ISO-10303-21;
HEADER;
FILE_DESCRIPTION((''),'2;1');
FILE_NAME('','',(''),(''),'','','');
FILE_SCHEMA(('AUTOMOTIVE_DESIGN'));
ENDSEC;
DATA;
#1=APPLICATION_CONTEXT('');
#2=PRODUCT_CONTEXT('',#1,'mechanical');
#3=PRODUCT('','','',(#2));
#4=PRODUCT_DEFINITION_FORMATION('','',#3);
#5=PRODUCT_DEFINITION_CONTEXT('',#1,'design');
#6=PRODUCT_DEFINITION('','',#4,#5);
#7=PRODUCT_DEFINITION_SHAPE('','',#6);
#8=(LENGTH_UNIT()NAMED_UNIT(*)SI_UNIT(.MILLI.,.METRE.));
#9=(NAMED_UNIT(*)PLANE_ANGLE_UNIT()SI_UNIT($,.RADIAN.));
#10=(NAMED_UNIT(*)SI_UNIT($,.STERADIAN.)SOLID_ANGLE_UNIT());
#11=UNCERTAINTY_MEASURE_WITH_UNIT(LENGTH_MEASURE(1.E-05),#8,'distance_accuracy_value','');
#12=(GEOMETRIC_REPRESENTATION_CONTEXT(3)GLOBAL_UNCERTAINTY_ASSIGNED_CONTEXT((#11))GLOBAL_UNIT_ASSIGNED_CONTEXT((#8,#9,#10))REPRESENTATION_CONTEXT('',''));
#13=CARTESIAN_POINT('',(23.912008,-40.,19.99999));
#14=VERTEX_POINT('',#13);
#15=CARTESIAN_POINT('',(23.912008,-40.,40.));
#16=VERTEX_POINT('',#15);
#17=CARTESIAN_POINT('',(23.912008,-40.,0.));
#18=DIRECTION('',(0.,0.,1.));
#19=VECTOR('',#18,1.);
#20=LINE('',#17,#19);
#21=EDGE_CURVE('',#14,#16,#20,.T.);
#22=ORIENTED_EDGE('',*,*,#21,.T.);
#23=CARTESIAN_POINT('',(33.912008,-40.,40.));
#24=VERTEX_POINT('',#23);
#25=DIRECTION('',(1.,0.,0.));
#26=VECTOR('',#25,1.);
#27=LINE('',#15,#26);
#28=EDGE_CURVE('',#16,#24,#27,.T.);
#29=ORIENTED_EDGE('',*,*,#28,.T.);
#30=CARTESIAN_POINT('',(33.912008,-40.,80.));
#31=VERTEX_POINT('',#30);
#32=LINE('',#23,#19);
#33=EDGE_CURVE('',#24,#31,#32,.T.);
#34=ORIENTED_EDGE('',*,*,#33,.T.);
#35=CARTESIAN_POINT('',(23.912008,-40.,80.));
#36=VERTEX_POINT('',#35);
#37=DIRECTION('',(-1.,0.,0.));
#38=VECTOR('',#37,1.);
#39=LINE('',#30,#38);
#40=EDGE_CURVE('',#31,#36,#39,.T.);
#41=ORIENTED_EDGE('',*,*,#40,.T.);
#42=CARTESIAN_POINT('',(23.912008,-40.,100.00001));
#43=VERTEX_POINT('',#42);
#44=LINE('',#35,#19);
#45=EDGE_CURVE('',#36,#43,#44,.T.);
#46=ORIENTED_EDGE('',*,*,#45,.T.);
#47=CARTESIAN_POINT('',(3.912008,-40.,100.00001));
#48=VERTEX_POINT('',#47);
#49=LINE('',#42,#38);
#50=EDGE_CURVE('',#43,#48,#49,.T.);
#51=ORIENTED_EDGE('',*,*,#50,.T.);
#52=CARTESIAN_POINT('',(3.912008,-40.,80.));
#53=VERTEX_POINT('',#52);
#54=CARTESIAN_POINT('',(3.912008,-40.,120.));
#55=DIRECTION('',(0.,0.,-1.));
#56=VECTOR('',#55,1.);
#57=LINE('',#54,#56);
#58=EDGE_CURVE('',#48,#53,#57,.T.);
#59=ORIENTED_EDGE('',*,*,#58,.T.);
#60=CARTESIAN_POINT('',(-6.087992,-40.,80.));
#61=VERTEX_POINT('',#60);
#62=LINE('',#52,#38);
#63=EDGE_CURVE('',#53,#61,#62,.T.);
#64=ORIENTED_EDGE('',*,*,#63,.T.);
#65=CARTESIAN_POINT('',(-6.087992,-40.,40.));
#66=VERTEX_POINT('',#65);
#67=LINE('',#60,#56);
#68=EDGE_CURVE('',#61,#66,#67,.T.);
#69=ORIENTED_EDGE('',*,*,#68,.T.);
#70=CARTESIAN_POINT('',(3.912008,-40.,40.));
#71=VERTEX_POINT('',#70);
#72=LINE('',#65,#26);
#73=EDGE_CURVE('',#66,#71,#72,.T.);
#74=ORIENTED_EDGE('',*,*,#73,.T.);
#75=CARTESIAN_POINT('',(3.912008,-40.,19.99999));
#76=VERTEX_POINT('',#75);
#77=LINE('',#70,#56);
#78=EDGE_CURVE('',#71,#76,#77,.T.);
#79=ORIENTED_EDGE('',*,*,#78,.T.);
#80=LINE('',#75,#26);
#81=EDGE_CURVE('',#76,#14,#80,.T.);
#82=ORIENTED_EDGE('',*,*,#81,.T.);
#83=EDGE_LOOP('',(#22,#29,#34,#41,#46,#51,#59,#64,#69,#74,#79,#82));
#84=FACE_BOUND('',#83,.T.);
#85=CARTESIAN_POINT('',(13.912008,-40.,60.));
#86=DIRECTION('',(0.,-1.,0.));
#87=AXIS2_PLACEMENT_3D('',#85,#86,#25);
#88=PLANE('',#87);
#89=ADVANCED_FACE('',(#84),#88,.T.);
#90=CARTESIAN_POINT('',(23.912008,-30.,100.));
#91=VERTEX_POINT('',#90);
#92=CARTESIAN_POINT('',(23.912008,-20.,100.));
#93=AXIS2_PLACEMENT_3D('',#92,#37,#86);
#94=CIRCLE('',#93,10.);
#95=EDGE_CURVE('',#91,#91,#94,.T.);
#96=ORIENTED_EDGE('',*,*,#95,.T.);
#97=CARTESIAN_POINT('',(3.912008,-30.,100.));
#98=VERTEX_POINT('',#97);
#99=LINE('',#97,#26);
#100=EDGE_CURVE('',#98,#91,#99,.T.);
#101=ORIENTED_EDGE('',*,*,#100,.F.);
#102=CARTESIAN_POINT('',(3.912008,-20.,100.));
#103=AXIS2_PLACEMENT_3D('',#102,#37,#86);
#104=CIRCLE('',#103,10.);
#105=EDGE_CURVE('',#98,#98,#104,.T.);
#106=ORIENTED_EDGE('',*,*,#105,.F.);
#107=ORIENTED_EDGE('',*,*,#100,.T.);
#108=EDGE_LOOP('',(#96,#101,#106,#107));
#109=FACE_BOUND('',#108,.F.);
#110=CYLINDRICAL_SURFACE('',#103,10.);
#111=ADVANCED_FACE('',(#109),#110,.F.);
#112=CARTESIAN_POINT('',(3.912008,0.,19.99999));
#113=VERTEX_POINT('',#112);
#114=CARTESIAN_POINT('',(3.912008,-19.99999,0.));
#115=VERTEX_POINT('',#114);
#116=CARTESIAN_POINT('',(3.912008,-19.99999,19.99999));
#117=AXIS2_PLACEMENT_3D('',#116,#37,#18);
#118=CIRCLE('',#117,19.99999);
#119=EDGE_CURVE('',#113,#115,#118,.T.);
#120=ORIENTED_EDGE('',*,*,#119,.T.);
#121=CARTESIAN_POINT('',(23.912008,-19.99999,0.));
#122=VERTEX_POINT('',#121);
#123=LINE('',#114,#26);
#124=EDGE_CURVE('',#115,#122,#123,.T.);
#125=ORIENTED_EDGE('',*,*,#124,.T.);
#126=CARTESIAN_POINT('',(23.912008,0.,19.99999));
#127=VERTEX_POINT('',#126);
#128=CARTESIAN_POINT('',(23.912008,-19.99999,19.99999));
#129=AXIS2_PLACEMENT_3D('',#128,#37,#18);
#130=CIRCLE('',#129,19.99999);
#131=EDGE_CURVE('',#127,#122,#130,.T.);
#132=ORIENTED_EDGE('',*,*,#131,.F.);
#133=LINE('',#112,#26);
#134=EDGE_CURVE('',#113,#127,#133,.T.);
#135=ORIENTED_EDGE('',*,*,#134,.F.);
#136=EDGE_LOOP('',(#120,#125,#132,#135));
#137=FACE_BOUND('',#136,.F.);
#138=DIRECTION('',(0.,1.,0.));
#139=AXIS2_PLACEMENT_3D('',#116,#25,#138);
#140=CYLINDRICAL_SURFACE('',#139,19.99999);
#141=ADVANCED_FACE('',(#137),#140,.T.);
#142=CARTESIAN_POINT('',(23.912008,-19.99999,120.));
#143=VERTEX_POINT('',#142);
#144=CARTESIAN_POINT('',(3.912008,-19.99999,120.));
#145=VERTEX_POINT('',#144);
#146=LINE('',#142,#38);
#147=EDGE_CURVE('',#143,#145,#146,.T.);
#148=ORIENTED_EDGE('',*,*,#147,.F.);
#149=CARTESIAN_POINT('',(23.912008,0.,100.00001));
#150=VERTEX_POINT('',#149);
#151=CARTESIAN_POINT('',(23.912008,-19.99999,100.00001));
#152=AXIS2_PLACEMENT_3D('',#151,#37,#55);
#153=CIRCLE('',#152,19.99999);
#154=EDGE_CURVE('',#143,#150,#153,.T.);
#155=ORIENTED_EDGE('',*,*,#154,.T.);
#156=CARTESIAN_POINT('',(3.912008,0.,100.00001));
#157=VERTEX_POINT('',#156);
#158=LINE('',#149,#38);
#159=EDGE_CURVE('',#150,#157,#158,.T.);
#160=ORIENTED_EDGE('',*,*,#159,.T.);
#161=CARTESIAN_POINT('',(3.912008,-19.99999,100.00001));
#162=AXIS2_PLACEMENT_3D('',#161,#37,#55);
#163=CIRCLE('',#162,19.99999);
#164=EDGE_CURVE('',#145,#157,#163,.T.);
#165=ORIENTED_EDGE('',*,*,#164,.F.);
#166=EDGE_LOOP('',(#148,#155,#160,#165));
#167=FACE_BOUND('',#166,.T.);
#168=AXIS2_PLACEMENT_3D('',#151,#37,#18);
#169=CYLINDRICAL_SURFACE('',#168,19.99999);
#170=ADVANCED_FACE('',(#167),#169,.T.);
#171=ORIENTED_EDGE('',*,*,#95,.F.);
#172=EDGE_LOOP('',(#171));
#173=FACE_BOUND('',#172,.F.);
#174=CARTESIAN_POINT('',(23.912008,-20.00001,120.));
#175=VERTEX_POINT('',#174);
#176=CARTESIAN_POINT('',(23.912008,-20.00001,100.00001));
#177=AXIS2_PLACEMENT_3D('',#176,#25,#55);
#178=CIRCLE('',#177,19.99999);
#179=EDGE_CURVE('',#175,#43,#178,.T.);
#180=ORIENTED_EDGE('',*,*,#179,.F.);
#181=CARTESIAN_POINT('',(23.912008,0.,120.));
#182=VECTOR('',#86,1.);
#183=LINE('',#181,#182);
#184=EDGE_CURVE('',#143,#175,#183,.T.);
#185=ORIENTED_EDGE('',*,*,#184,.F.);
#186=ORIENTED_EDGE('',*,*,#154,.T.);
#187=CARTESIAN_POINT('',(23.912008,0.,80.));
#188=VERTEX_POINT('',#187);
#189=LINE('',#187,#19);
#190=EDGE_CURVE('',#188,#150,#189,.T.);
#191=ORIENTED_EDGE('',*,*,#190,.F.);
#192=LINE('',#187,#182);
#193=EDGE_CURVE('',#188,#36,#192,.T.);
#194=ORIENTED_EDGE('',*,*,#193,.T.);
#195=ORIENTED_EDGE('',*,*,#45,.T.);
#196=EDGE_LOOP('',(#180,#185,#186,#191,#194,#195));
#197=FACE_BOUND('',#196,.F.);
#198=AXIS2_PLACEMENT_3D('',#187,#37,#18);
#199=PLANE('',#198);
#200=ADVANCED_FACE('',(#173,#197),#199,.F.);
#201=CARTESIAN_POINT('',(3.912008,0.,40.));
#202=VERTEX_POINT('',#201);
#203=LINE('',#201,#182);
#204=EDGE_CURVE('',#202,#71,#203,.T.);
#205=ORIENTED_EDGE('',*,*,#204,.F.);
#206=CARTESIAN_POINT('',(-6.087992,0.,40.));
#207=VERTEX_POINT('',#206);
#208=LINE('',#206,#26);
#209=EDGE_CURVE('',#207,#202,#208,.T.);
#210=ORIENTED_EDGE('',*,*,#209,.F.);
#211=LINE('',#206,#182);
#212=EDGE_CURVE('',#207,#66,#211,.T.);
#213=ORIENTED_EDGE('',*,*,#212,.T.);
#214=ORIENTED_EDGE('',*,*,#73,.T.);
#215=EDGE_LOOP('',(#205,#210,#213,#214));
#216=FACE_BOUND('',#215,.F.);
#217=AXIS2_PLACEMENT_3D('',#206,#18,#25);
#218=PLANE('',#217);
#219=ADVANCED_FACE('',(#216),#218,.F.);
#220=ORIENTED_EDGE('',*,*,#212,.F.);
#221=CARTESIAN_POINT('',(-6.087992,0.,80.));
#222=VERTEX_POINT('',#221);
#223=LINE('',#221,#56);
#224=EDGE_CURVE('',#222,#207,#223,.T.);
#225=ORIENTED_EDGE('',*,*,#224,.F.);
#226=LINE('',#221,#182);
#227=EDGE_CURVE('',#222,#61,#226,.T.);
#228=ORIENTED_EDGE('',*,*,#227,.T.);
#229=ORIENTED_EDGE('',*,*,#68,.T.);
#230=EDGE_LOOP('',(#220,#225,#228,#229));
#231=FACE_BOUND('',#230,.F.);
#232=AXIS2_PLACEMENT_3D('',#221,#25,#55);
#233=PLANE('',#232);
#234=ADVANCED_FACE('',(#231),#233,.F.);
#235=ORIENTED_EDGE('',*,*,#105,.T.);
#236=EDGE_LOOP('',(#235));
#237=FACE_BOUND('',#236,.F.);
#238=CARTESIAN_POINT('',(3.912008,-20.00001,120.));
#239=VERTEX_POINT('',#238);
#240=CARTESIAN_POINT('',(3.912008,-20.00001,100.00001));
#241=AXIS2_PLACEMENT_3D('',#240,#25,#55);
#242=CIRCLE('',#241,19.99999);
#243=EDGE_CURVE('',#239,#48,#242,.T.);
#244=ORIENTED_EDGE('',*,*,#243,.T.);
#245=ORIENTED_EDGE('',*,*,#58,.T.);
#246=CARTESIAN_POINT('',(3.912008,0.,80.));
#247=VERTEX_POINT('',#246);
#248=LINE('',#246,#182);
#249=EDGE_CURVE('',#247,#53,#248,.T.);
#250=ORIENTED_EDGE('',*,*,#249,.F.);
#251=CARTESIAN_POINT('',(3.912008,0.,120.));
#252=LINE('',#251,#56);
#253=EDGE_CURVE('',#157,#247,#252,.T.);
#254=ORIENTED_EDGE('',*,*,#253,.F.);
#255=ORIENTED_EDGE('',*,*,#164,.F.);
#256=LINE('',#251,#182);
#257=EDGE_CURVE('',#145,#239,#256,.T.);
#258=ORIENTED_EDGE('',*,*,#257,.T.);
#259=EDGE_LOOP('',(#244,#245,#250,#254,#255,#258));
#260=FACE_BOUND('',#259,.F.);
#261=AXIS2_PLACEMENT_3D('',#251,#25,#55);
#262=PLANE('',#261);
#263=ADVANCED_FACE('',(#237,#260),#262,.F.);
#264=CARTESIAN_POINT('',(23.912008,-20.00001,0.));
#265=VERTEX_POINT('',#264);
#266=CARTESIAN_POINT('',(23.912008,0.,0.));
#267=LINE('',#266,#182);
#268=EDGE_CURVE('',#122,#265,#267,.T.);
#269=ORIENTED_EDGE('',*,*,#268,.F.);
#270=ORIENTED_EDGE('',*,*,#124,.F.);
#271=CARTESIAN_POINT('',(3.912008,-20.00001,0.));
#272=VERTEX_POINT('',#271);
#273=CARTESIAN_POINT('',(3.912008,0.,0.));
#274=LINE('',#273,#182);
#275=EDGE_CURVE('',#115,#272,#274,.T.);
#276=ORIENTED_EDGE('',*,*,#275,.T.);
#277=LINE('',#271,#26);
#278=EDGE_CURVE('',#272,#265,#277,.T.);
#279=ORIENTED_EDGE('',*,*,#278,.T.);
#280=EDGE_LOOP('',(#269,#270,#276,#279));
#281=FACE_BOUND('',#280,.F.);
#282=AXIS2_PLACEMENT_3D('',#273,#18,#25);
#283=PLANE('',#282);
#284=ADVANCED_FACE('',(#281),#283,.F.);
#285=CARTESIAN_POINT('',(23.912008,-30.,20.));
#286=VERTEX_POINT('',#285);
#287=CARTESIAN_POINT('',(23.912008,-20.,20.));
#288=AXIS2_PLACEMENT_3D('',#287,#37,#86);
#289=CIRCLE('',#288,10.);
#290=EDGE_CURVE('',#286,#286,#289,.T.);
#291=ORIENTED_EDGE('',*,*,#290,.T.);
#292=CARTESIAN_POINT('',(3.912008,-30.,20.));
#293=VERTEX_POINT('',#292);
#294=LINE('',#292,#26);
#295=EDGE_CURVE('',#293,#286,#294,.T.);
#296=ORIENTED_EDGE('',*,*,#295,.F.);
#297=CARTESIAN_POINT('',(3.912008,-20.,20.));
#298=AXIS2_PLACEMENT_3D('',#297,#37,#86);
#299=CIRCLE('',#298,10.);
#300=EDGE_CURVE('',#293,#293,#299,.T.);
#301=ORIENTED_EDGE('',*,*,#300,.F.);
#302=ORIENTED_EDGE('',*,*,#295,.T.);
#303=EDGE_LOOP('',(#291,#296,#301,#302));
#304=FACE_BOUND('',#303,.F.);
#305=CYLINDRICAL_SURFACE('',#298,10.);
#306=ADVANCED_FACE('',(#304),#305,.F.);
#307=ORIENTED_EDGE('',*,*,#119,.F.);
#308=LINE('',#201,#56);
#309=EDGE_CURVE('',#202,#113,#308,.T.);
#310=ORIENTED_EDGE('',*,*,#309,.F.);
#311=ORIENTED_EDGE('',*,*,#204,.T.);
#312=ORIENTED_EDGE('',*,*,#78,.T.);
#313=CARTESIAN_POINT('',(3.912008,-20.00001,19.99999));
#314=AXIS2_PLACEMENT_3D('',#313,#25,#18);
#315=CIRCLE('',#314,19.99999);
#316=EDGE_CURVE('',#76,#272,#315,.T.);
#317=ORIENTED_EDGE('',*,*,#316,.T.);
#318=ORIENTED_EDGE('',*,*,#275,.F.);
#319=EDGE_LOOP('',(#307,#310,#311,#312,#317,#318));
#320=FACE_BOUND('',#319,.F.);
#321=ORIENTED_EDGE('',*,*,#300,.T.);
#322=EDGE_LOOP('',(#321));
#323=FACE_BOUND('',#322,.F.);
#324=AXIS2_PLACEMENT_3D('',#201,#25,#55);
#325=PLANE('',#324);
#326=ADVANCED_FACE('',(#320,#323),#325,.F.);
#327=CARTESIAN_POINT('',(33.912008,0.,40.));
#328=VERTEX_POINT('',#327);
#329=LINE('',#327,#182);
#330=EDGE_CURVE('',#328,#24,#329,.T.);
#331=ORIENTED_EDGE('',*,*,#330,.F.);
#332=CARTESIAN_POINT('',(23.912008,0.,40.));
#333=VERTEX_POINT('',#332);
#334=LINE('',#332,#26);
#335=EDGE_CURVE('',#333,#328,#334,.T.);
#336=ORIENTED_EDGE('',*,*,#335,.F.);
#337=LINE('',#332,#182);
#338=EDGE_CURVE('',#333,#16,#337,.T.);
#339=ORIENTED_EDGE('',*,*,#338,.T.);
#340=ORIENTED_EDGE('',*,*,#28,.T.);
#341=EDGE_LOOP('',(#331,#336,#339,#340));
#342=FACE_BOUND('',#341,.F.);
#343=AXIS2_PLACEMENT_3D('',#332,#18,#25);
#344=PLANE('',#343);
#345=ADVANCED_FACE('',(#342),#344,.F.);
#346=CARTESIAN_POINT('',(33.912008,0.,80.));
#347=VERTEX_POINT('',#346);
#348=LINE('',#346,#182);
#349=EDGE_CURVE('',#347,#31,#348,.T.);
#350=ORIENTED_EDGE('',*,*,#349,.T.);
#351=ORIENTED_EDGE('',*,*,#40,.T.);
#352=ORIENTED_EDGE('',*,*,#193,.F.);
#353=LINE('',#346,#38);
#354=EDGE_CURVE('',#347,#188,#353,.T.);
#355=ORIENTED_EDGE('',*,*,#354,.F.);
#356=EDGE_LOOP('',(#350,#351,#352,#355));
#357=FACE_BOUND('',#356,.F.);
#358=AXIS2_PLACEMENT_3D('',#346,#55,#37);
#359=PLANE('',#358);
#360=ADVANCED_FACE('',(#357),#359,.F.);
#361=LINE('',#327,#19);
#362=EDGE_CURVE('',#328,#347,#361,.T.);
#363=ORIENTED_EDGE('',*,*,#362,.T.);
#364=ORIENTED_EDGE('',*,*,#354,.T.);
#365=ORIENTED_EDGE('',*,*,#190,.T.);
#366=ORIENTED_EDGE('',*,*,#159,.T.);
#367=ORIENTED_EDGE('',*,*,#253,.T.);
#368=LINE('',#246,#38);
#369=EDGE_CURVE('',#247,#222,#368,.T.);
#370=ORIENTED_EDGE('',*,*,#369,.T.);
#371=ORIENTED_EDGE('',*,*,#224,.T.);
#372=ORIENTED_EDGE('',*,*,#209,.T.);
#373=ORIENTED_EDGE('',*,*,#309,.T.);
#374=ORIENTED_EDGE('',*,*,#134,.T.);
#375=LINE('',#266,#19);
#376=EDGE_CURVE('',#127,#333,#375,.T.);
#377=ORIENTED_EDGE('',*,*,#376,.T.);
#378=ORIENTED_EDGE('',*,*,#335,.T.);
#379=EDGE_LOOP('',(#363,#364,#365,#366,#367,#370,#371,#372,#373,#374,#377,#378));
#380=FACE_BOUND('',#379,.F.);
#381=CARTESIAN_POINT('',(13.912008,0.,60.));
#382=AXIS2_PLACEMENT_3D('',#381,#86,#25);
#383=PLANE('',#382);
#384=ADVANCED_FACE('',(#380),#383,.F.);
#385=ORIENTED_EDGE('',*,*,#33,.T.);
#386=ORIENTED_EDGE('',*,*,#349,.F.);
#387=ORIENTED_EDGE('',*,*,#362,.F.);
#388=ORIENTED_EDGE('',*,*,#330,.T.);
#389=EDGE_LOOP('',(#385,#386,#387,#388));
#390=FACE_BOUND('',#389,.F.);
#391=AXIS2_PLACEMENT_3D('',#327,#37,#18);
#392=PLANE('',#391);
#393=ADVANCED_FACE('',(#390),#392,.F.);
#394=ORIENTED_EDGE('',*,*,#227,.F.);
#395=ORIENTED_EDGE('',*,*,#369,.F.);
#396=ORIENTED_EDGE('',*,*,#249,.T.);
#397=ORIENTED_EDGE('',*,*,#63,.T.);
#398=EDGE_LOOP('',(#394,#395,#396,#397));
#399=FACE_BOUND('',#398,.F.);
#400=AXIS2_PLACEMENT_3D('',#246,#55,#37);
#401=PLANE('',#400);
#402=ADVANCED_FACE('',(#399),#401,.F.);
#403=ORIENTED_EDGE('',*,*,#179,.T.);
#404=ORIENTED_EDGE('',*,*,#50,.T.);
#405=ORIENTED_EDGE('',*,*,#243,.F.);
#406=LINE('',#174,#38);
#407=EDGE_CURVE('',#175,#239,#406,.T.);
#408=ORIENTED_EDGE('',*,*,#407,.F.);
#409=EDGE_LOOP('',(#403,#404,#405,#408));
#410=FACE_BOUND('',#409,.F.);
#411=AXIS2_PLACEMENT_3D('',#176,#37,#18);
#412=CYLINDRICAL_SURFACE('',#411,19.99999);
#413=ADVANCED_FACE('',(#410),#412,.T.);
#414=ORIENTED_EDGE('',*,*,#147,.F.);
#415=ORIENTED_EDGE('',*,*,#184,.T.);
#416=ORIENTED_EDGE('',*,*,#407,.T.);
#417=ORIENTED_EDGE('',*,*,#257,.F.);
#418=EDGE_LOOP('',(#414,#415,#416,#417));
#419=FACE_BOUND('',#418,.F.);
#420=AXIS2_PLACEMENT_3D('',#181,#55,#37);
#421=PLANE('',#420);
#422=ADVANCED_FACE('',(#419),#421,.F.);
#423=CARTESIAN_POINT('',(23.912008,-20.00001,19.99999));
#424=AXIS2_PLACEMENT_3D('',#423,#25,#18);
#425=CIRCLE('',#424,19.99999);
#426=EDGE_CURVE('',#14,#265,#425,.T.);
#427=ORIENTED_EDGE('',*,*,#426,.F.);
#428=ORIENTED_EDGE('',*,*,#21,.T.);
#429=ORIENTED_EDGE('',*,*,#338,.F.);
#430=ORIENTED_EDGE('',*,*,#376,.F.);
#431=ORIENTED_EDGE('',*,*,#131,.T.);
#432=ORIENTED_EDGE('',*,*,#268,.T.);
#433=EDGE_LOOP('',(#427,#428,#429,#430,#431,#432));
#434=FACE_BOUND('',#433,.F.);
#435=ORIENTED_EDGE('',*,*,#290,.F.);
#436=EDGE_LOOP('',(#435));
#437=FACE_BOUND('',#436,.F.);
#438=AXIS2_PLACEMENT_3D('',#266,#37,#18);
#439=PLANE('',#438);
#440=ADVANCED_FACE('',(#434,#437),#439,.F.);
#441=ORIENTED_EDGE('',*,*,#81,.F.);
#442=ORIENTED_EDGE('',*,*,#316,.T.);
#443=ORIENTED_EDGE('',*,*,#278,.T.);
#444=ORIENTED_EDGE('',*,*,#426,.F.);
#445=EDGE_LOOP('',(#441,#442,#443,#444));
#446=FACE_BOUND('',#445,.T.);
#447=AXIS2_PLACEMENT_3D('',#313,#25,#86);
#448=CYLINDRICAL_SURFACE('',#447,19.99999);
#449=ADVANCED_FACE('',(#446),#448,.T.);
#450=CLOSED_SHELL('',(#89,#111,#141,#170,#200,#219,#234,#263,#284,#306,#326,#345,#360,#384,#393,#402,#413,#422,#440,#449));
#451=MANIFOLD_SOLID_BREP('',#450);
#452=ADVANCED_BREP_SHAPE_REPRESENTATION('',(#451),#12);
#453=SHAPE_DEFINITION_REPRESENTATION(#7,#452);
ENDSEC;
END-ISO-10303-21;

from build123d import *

# Parameters (mm, degrees)
F1_DEPTH = 40
F2_R     = 19.99999
F3_R     = 19.99999
F4_R     = 10
F5_DEPTH = 20
F6_R     = 10
F7_DEPTH = 20


# Not quite as in the source:
# - a fillet or chamfer is up to 0.001 mm smaller than in the source, because OpenCascade refuses the exact size


with BuildPart() as f1:
    # F0 (on Front) → F1 (new body)
    with BuildSketch(Plane.XZ):
        Polygon((3.91200836, 0), (23.91200836, 0), (23.91200836, 40), (33.91200836, 40), (33.91200836, 80), (23.91200836, 80), (23.91200836, 120), (3.91200836, 120), (3.91200836, 80), (-6.08799164, 80), (-6.08799164, 40), (3.91200836, 40), align=None)
    extrude(amount=F1_DEPTH)

    # F2 (radius 20 in the source; OpenCascade refuses exactly that, so slightly less here)
    f2_edges = [f1.edges().sort_by_distance(p)[0] for p in [
        (13.912008, 0, 120),
        (13.912008, -40, 120),
    ]]
    fillet(f2_edges, radius=F2_R)

    # F3 (radius 20 in the source; OpenCascade refuses exactly that, so slightly less here)
    f3_edges = [f1.edges().sort_by_distance(p)[0] for p in [
        (13.912008, -40, 0),
        (13.912008, 0, 0),
    ]]
    fillet(f3_edges, radius=F3_R)

    # F4 (on face) → F5 (cut, through all)
    with BuildSketch(Plane(origin=(3.91200836, 0, 0), x_dir=(0, -1, 0), z_dir=(-1, 0, 0))):
        with Locations((20, 100)):
            Circle(F4_R)
    extrude(amount=-F5_DEPTH, mode=Mode.SUBTRACT)

    # F6 (on face) → F7 (cut, through all)
    with BuildSketch(Plane(origin=(3.91200836, 0, 0), x_dir=(0, -1, 0), z_dir=(-1, 0, 0))):
        with Locations((20, 20)):
            Circle(F6_R)
    extrude(amount=-F7_DEPTH, mode=Mode.SUBTRACT)


solid = f1.part
